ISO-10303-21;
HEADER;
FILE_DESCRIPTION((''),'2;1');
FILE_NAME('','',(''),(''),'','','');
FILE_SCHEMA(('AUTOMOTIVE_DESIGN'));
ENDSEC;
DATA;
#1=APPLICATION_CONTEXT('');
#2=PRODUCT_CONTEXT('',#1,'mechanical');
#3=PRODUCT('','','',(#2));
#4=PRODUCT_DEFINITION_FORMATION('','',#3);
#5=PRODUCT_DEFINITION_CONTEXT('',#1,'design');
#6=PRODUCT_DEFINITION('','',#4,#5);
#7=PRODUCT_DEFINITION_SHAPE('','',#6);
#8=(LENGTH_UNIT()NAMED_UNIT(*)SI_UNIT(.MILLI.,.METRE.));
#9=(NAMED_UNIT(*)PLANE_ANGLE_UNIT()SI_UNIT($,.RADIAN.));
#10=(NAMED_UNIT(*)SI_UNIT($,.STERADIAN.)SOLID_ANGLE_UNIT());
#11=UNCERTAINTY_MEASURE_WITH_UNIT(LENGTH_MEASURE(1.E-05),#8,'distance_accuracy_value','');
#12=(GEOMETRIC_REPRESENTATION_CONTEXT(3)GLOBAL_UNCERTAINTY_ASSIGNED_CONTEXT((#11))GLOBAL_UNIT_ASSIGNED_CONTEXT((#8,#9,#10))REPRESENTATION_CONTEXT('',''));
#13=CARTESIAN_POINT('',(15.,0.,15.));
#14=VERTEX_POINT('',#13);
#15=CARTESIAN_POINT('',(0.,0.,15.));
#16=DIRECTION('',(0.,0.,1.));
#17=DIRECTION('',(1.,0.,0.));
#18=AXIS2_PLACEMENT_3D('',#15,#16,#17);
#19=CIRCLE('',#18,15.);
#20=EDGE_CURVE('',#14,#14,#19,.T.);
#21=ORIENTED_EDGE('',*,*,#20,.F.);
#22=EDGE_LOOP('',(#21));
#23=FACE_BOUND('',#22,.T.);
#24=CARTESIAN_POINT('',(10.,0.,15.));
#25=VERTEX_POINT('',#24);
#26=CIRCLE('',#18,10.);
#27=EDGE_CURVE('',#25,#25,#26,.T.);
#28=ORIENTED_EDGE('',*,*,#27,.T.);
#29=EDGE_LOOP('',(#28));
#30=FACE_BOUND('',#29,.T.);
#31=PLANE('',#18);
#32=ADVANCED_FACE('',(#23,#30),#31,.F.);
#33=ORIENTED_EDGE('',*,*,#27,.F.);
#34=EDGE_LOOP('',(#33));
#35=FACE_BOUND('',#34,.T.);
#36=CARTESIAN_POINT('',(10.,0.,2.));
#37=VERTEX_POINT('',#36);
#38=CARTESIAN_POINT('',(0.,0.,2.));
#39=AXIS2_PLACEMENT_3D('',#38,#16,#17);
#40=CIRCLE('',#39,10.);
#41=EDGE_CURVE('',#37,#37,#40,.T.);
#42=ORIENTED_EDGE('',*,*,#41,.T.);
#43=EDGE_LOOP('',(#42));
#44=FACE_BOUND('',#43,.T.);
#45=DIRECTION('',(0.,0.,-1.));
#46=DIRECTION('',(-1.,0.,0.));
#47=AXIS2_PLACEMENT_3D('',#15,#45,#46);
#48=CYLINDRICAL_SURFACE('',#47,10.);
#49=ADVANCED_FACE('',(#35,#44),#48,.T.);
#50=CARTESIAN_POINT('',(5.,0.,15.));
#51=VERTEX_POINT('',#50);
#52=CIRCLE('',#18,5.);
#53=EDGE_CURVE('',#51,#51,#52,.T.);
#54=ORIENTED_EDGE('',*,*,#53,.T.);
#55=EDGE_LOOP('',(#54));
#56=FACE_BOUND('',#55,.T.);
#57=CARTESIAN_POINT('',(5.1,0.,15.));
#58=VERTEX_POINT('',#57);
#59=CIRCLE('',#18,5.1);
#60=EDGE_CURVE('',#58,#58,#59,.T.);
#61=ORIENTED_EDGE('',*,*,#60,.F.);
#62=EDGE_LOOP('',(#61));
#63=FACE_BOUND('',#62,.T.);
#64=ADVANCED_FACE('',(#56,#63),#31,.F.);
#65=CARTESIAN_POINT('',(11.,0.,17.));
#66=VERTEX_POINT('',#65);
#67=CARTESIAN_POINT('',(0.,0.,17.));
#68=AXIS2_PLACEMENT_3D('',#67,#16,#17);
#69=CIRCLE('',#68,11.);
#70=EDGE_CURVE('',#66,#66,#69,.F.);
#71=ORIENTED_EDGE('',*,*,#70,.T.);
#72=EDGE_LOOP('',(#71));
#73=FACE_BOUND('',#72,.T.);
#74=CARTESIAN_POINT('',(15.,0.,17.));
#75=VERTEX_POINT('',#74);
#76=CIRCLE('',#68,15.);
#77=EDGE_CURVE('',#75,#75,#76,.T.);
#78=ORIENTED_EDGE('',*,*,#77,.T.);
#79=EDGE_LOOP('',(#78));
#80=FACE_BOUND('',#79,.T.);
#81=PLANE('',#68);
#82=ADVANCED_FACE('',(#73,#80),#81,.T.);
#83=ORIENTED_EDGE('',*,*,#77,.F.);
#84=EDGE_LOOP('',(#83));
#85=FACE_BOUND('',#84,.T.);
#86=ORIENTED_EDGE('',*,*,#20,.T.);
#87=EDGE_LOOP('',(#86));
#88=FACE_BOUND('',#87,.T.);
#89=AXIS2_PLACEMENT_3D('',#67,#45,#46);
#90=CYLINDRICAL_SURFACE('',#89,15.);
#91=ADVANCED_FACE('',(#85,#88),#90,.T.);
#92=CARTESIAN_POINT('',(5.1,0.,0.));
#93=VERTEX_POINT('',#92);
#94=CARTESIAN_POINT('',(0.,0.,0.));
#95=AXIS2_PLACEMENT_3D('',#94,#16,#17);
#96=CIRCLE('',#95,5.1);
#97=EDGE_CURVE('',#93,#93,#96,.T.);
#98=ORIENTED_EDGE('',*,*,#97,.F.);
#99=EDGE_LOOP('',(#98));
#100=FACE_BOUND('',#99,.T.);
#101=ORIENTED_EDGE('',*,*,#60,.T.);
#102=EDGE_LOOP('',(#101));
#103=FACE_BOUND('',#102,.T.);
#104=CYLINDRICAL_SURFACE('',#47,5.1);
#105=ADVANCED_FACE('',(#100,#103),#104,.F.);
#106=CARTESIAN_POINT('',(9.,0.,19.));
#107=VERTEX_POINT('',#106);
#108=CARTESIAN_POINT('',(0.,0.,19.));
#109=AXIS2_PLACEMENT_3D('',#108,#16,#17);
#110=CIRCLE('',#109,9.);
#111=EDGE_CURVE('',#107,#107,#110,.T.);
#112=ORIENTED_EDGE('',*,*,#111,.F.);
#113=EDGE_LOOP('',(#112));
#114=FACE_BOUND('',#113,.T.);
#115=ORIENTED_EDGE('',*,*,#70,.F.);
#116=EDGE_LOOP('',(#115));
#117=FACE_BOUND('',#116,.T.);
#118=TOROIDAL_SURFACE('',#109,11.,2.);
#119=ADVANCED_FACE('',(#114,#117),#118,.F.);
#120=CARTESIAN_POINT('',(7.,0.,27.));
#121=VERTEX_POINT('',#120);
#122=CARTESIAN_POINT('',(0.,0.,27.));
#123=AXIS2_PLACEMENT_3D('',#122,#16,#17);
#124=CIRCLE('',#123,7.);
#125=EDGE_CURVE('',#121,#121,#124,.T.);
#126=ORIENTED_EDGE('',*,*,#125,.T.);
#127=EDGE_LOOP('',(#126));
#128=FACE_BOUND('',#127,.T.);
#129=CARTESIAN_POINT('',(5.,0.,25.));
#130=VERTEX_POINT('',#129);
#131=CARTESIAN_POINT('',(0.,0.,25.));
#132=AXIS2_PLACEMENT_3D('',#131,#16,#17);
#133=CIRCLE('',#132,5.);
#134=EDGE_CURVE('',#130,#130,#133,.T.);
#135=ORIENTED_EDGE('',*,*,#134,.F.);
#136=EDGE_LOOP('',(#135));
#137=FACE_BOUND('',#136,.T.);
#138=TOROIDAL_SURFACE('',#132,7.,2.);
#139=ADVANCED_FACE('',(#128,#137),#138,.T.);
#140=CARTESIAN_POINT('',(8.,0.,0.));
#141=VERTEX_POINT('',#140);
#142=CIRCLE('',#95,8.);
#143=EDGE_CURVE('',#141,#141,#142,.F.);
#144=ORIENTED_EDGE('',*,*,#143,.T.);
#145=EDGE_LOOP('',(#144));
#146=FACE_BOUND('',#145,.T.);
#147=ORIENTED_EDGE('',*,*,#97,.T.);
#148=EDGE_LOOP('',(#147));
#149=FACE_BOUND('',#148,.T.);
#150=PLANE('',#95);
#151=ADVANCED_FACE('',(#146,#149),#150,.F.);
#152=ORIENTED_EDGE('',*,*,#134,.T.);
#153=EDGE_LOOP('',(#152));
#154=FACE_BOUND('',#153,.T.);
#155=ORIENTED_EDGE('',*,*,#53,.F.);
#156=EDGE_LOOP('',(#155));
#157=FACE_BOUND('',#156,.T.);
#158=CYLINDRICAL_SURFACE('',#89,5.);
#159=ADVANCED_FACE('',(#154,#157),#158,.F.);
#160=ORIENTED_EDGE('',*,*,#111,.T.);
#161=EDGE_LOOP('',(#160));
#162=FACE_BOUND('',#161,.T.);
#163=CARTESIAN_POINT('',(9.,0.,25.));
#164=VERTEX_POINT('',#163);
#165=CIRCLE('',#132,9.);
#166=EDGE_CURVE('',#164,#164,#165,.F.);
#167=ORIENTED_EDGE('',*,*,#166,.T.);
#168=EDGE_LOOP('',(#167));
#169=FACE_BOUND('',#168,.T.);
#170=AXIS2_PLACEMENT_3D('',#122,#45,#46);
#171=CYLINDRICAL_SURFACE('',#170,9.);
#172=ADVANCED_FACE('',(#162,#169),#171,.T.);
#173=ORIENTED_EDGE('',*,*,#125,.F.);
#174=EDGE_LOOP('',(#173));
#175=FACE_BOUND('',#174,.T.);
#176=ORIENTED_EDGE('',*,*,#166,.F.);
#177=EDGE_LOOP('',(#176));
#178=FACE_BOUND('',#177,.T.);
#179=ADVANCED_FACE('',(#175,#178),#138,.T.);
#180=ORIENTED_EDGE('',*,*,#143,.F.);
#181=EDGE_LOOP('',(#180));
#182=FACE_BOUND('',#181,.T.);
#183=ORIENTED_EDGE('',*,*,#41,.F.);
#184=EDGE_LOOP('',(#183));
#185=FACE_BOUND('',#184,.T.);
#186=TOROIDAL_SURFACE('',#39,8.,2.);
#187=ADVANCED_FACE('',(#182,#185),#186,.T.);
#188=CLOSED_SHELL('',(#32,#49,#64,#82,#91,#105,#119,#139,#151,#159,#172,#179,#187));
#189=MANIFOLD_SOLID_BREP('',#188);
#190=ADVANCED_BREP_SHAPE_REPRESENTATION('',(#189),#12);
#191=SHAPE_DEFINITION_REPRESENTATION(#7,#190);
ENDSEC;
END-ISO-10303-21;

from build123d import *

# Parameters (mm, degrees)
SKETCH_1_R      = 10
SKETCH_1_R_2    = 5.1
EXTRUDE_1_DEPTH = 15
SKETCH_2_R      = 15
SKETCH_2_R_2    = 5
EXTRUDE_2_DEPTH = 2
SKETCH_3_R      = 9
SKETCH_3_R_2    = 5
EXTRUDE_3_DEPTH = 10
FILLET_1_R      = 2


with BuildPart() as part:
    # 草图1 → 凸台-拉伸1 (new body)
    with BuildSketch(Plane.XY):
        Circle(SKETCH_1_R)
        Circle(SKETCH_1_R_2, mode=Mode.SUBTRACT)
    extrude(amount=EXTRUDE_1_DEPTH)

    # 草图2 → 凸台-拉伸2 (add)
    with BuildSketch(Plane.XY.offset(15)):
        Circle(SKETCH_2_R)
        Circle(SKETCH_2_R_2, mode=Mode.SUBTRACT)
    extrude(amount=EXTRUDE_2_DEPTH)

    # 草图3 → 凸台-拉伸3 (add)
    with BuildSketch(Plane.XY.offset(17)):
        Circle(SKETCH_3_R)
        Circle(SKETCH_3_R_2, mode=Mode.SUBTRACT)
    extrude(amount=EXTRUDE_3_DEPTH)

    # 圆角1
    fillet_1_edges = [part.edges().sort_by_distance(p)[0] for p in [
        (-9, 0, 17),
        (-9, 0, 27),
        (-5, 0, 27),
        (-10, 0, 0),
    ]]
    fillet(fillet_1_edges, radius=FILLET_1_R - 0.0001)  # a hair under: the kernel refuses the full size


solid = part.part
